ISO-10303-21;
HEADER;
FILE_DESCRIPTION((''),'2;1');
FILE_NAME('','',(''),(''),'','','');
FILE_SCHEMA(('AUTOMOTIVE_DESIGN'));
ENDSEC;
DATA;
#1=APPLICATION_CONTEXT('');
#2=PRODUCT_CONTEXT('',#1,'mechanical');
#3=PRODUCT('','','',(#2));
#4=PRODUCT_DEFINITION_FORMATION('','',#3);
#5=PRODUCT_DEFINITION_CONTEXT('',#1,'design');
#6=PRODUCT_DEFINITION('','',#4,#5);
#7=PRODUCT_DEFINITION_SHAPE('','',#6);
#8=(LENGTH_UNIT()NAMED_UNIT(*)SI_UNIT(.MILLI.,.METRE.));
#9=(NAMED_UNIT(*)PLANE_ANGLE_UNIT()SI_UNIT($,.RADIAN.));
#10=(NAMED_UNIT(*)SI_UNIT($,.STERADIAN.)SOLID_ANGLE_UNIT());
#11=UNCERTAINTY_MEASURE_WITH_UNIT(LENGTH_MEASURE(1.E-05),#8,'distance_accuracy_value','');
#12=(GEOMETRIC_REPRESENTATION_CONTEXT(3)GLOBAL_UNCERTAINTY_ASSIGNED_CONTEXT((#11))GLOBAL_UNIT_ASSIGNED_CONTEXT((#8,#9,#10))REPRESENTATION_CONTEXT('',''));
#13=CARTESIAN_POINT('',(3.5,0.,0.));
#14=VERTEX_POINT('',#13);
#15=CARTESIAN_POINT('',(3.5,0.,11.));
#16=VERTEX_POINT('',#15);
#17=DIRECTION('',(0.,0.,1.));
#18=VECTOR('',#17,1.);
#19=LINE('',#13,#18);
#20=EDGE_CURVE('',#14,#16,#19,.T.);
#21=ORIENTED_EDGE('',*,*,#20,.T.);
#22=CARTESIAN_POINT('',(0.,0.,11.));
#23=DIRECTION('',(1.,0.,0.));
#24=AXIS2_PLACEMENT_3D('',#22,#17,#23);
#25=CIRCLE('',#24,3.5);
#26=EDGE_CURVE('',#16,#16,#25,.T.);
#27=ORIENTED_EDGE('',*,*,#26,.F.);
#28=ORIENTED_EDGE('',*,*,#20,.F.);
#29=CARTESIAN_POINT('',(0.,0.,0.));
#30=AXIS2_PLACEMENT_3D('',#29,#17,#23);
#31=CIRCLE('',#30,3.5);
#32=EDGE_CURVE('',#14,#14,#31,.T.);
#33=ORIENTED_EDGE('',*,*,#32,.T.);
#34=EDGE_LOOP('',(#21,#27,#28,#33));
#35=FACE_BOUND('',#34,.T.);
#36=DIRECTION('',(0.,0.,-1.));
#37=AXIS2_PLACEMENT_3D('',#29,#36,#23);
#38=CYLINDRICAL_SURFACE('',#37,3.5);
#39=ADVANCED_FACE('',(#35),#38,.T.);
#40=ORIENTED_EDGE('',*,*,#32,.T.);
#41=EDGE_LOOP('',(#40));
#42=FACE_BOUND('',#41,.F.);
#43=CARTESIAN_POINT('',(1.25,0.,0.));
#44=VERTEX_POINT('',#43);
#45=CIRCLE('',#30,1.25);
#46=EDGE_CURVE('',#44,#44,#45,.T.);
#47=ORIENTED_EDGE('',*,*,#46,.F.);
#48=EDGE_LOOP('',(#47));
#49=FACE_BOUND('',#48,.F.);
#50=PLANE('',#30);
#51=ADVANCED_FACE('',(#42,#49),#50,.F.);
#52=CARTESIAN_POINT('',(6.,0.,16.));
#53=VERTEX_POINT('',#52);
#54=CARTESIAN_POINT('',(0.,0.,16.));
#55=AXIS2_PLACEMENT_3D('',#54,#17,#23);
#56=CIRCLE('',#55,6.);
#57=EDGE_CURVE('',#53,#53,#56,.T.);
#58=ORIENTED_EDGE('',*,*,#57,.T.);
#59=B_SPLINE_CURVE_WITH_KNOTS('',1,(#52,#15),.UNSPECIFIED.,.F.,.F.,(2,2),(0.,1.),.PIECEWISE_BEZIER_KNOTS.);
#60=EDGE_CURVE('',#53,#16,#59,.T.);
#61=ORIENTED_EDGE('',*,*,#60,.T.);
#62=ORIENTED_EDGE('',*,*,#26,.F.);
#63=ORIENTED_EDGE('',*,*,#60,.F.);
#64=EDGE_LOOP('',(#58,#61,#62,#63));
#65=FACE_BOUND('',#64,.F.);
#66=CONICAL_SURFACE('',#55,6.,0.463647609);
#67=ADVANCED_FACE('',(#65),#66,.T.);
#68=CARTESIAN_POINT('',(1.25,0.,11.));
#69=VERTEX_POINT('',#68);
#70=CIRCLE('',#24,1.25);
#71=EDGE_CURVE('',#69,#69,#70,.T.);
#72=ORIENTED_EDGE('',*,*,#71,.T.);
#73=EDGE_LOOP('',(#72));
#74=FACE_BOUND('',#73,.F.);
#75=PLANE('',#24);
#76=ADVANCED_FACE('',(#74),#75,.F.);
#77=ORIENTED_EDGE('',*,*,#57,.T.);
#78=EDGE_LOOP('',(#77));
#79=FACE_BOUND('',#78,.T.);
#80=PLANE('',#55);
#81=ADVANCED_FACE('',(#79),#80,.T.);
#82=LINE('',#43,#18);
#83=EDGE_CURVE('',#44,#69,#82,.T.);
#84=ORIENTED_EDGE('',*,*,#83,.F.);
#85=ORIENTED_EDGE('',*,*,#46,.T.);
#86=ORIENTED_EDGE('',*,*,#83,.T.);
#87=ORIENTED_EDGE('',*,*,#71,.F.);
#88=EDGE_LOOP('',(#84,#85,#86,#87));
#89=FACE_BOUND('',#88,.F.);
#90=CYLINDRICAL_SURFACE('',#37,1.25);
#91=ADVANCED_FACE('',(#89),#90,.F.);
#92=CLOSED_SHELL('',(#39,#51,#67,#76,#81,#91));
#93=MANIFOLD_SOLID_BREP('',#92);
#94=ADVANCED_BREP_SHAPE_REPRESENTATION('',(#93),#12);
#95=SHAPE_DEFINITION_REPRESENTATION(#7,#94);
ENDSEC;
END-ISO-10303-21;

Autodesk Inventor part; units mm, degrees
ref_plane "YZ Plane" through (0, 0, 0) normal (1, 0, 0) x (0, 1, 0)
ref_plane "XZ Plane" through (0, 0, 0) normal (0, 1, 0) x (-1, 0, 0)
ref_plane "XY Plane" through (0, 0, 0) normal (0, 0, 1) x (1, 0, 0)
sketch "Эскиз1" plane through (0, 0, 0) normal (0, 0, 1) x (1, 0, 0)
  circle A0 centre (0, 0) radius 1.25
  circle A1 centre (0, 0) radius 3.5
  dimension "d0" = 2.5
  dimension "d1" = 7
extrude "Выдавливание1" add sketch "Эскиз1" along normal blind 11
ref_plane "РабПлоскость1" through (0, 0, 16) normal (0, 0, 1) x (1, 0, 0)
sketch "Эскиз3" plane through (0, 0, 16) normal (0, 0, 1) x (1, 0, 0)
  circle A0 centre (0, 0) radius 6
  dimension "d5" = 12
loft "Лофт1" add profiles "Эскиз3" section 2 edges at (-3.5, 0, 11)
properties part number "Стойка_16мм"
